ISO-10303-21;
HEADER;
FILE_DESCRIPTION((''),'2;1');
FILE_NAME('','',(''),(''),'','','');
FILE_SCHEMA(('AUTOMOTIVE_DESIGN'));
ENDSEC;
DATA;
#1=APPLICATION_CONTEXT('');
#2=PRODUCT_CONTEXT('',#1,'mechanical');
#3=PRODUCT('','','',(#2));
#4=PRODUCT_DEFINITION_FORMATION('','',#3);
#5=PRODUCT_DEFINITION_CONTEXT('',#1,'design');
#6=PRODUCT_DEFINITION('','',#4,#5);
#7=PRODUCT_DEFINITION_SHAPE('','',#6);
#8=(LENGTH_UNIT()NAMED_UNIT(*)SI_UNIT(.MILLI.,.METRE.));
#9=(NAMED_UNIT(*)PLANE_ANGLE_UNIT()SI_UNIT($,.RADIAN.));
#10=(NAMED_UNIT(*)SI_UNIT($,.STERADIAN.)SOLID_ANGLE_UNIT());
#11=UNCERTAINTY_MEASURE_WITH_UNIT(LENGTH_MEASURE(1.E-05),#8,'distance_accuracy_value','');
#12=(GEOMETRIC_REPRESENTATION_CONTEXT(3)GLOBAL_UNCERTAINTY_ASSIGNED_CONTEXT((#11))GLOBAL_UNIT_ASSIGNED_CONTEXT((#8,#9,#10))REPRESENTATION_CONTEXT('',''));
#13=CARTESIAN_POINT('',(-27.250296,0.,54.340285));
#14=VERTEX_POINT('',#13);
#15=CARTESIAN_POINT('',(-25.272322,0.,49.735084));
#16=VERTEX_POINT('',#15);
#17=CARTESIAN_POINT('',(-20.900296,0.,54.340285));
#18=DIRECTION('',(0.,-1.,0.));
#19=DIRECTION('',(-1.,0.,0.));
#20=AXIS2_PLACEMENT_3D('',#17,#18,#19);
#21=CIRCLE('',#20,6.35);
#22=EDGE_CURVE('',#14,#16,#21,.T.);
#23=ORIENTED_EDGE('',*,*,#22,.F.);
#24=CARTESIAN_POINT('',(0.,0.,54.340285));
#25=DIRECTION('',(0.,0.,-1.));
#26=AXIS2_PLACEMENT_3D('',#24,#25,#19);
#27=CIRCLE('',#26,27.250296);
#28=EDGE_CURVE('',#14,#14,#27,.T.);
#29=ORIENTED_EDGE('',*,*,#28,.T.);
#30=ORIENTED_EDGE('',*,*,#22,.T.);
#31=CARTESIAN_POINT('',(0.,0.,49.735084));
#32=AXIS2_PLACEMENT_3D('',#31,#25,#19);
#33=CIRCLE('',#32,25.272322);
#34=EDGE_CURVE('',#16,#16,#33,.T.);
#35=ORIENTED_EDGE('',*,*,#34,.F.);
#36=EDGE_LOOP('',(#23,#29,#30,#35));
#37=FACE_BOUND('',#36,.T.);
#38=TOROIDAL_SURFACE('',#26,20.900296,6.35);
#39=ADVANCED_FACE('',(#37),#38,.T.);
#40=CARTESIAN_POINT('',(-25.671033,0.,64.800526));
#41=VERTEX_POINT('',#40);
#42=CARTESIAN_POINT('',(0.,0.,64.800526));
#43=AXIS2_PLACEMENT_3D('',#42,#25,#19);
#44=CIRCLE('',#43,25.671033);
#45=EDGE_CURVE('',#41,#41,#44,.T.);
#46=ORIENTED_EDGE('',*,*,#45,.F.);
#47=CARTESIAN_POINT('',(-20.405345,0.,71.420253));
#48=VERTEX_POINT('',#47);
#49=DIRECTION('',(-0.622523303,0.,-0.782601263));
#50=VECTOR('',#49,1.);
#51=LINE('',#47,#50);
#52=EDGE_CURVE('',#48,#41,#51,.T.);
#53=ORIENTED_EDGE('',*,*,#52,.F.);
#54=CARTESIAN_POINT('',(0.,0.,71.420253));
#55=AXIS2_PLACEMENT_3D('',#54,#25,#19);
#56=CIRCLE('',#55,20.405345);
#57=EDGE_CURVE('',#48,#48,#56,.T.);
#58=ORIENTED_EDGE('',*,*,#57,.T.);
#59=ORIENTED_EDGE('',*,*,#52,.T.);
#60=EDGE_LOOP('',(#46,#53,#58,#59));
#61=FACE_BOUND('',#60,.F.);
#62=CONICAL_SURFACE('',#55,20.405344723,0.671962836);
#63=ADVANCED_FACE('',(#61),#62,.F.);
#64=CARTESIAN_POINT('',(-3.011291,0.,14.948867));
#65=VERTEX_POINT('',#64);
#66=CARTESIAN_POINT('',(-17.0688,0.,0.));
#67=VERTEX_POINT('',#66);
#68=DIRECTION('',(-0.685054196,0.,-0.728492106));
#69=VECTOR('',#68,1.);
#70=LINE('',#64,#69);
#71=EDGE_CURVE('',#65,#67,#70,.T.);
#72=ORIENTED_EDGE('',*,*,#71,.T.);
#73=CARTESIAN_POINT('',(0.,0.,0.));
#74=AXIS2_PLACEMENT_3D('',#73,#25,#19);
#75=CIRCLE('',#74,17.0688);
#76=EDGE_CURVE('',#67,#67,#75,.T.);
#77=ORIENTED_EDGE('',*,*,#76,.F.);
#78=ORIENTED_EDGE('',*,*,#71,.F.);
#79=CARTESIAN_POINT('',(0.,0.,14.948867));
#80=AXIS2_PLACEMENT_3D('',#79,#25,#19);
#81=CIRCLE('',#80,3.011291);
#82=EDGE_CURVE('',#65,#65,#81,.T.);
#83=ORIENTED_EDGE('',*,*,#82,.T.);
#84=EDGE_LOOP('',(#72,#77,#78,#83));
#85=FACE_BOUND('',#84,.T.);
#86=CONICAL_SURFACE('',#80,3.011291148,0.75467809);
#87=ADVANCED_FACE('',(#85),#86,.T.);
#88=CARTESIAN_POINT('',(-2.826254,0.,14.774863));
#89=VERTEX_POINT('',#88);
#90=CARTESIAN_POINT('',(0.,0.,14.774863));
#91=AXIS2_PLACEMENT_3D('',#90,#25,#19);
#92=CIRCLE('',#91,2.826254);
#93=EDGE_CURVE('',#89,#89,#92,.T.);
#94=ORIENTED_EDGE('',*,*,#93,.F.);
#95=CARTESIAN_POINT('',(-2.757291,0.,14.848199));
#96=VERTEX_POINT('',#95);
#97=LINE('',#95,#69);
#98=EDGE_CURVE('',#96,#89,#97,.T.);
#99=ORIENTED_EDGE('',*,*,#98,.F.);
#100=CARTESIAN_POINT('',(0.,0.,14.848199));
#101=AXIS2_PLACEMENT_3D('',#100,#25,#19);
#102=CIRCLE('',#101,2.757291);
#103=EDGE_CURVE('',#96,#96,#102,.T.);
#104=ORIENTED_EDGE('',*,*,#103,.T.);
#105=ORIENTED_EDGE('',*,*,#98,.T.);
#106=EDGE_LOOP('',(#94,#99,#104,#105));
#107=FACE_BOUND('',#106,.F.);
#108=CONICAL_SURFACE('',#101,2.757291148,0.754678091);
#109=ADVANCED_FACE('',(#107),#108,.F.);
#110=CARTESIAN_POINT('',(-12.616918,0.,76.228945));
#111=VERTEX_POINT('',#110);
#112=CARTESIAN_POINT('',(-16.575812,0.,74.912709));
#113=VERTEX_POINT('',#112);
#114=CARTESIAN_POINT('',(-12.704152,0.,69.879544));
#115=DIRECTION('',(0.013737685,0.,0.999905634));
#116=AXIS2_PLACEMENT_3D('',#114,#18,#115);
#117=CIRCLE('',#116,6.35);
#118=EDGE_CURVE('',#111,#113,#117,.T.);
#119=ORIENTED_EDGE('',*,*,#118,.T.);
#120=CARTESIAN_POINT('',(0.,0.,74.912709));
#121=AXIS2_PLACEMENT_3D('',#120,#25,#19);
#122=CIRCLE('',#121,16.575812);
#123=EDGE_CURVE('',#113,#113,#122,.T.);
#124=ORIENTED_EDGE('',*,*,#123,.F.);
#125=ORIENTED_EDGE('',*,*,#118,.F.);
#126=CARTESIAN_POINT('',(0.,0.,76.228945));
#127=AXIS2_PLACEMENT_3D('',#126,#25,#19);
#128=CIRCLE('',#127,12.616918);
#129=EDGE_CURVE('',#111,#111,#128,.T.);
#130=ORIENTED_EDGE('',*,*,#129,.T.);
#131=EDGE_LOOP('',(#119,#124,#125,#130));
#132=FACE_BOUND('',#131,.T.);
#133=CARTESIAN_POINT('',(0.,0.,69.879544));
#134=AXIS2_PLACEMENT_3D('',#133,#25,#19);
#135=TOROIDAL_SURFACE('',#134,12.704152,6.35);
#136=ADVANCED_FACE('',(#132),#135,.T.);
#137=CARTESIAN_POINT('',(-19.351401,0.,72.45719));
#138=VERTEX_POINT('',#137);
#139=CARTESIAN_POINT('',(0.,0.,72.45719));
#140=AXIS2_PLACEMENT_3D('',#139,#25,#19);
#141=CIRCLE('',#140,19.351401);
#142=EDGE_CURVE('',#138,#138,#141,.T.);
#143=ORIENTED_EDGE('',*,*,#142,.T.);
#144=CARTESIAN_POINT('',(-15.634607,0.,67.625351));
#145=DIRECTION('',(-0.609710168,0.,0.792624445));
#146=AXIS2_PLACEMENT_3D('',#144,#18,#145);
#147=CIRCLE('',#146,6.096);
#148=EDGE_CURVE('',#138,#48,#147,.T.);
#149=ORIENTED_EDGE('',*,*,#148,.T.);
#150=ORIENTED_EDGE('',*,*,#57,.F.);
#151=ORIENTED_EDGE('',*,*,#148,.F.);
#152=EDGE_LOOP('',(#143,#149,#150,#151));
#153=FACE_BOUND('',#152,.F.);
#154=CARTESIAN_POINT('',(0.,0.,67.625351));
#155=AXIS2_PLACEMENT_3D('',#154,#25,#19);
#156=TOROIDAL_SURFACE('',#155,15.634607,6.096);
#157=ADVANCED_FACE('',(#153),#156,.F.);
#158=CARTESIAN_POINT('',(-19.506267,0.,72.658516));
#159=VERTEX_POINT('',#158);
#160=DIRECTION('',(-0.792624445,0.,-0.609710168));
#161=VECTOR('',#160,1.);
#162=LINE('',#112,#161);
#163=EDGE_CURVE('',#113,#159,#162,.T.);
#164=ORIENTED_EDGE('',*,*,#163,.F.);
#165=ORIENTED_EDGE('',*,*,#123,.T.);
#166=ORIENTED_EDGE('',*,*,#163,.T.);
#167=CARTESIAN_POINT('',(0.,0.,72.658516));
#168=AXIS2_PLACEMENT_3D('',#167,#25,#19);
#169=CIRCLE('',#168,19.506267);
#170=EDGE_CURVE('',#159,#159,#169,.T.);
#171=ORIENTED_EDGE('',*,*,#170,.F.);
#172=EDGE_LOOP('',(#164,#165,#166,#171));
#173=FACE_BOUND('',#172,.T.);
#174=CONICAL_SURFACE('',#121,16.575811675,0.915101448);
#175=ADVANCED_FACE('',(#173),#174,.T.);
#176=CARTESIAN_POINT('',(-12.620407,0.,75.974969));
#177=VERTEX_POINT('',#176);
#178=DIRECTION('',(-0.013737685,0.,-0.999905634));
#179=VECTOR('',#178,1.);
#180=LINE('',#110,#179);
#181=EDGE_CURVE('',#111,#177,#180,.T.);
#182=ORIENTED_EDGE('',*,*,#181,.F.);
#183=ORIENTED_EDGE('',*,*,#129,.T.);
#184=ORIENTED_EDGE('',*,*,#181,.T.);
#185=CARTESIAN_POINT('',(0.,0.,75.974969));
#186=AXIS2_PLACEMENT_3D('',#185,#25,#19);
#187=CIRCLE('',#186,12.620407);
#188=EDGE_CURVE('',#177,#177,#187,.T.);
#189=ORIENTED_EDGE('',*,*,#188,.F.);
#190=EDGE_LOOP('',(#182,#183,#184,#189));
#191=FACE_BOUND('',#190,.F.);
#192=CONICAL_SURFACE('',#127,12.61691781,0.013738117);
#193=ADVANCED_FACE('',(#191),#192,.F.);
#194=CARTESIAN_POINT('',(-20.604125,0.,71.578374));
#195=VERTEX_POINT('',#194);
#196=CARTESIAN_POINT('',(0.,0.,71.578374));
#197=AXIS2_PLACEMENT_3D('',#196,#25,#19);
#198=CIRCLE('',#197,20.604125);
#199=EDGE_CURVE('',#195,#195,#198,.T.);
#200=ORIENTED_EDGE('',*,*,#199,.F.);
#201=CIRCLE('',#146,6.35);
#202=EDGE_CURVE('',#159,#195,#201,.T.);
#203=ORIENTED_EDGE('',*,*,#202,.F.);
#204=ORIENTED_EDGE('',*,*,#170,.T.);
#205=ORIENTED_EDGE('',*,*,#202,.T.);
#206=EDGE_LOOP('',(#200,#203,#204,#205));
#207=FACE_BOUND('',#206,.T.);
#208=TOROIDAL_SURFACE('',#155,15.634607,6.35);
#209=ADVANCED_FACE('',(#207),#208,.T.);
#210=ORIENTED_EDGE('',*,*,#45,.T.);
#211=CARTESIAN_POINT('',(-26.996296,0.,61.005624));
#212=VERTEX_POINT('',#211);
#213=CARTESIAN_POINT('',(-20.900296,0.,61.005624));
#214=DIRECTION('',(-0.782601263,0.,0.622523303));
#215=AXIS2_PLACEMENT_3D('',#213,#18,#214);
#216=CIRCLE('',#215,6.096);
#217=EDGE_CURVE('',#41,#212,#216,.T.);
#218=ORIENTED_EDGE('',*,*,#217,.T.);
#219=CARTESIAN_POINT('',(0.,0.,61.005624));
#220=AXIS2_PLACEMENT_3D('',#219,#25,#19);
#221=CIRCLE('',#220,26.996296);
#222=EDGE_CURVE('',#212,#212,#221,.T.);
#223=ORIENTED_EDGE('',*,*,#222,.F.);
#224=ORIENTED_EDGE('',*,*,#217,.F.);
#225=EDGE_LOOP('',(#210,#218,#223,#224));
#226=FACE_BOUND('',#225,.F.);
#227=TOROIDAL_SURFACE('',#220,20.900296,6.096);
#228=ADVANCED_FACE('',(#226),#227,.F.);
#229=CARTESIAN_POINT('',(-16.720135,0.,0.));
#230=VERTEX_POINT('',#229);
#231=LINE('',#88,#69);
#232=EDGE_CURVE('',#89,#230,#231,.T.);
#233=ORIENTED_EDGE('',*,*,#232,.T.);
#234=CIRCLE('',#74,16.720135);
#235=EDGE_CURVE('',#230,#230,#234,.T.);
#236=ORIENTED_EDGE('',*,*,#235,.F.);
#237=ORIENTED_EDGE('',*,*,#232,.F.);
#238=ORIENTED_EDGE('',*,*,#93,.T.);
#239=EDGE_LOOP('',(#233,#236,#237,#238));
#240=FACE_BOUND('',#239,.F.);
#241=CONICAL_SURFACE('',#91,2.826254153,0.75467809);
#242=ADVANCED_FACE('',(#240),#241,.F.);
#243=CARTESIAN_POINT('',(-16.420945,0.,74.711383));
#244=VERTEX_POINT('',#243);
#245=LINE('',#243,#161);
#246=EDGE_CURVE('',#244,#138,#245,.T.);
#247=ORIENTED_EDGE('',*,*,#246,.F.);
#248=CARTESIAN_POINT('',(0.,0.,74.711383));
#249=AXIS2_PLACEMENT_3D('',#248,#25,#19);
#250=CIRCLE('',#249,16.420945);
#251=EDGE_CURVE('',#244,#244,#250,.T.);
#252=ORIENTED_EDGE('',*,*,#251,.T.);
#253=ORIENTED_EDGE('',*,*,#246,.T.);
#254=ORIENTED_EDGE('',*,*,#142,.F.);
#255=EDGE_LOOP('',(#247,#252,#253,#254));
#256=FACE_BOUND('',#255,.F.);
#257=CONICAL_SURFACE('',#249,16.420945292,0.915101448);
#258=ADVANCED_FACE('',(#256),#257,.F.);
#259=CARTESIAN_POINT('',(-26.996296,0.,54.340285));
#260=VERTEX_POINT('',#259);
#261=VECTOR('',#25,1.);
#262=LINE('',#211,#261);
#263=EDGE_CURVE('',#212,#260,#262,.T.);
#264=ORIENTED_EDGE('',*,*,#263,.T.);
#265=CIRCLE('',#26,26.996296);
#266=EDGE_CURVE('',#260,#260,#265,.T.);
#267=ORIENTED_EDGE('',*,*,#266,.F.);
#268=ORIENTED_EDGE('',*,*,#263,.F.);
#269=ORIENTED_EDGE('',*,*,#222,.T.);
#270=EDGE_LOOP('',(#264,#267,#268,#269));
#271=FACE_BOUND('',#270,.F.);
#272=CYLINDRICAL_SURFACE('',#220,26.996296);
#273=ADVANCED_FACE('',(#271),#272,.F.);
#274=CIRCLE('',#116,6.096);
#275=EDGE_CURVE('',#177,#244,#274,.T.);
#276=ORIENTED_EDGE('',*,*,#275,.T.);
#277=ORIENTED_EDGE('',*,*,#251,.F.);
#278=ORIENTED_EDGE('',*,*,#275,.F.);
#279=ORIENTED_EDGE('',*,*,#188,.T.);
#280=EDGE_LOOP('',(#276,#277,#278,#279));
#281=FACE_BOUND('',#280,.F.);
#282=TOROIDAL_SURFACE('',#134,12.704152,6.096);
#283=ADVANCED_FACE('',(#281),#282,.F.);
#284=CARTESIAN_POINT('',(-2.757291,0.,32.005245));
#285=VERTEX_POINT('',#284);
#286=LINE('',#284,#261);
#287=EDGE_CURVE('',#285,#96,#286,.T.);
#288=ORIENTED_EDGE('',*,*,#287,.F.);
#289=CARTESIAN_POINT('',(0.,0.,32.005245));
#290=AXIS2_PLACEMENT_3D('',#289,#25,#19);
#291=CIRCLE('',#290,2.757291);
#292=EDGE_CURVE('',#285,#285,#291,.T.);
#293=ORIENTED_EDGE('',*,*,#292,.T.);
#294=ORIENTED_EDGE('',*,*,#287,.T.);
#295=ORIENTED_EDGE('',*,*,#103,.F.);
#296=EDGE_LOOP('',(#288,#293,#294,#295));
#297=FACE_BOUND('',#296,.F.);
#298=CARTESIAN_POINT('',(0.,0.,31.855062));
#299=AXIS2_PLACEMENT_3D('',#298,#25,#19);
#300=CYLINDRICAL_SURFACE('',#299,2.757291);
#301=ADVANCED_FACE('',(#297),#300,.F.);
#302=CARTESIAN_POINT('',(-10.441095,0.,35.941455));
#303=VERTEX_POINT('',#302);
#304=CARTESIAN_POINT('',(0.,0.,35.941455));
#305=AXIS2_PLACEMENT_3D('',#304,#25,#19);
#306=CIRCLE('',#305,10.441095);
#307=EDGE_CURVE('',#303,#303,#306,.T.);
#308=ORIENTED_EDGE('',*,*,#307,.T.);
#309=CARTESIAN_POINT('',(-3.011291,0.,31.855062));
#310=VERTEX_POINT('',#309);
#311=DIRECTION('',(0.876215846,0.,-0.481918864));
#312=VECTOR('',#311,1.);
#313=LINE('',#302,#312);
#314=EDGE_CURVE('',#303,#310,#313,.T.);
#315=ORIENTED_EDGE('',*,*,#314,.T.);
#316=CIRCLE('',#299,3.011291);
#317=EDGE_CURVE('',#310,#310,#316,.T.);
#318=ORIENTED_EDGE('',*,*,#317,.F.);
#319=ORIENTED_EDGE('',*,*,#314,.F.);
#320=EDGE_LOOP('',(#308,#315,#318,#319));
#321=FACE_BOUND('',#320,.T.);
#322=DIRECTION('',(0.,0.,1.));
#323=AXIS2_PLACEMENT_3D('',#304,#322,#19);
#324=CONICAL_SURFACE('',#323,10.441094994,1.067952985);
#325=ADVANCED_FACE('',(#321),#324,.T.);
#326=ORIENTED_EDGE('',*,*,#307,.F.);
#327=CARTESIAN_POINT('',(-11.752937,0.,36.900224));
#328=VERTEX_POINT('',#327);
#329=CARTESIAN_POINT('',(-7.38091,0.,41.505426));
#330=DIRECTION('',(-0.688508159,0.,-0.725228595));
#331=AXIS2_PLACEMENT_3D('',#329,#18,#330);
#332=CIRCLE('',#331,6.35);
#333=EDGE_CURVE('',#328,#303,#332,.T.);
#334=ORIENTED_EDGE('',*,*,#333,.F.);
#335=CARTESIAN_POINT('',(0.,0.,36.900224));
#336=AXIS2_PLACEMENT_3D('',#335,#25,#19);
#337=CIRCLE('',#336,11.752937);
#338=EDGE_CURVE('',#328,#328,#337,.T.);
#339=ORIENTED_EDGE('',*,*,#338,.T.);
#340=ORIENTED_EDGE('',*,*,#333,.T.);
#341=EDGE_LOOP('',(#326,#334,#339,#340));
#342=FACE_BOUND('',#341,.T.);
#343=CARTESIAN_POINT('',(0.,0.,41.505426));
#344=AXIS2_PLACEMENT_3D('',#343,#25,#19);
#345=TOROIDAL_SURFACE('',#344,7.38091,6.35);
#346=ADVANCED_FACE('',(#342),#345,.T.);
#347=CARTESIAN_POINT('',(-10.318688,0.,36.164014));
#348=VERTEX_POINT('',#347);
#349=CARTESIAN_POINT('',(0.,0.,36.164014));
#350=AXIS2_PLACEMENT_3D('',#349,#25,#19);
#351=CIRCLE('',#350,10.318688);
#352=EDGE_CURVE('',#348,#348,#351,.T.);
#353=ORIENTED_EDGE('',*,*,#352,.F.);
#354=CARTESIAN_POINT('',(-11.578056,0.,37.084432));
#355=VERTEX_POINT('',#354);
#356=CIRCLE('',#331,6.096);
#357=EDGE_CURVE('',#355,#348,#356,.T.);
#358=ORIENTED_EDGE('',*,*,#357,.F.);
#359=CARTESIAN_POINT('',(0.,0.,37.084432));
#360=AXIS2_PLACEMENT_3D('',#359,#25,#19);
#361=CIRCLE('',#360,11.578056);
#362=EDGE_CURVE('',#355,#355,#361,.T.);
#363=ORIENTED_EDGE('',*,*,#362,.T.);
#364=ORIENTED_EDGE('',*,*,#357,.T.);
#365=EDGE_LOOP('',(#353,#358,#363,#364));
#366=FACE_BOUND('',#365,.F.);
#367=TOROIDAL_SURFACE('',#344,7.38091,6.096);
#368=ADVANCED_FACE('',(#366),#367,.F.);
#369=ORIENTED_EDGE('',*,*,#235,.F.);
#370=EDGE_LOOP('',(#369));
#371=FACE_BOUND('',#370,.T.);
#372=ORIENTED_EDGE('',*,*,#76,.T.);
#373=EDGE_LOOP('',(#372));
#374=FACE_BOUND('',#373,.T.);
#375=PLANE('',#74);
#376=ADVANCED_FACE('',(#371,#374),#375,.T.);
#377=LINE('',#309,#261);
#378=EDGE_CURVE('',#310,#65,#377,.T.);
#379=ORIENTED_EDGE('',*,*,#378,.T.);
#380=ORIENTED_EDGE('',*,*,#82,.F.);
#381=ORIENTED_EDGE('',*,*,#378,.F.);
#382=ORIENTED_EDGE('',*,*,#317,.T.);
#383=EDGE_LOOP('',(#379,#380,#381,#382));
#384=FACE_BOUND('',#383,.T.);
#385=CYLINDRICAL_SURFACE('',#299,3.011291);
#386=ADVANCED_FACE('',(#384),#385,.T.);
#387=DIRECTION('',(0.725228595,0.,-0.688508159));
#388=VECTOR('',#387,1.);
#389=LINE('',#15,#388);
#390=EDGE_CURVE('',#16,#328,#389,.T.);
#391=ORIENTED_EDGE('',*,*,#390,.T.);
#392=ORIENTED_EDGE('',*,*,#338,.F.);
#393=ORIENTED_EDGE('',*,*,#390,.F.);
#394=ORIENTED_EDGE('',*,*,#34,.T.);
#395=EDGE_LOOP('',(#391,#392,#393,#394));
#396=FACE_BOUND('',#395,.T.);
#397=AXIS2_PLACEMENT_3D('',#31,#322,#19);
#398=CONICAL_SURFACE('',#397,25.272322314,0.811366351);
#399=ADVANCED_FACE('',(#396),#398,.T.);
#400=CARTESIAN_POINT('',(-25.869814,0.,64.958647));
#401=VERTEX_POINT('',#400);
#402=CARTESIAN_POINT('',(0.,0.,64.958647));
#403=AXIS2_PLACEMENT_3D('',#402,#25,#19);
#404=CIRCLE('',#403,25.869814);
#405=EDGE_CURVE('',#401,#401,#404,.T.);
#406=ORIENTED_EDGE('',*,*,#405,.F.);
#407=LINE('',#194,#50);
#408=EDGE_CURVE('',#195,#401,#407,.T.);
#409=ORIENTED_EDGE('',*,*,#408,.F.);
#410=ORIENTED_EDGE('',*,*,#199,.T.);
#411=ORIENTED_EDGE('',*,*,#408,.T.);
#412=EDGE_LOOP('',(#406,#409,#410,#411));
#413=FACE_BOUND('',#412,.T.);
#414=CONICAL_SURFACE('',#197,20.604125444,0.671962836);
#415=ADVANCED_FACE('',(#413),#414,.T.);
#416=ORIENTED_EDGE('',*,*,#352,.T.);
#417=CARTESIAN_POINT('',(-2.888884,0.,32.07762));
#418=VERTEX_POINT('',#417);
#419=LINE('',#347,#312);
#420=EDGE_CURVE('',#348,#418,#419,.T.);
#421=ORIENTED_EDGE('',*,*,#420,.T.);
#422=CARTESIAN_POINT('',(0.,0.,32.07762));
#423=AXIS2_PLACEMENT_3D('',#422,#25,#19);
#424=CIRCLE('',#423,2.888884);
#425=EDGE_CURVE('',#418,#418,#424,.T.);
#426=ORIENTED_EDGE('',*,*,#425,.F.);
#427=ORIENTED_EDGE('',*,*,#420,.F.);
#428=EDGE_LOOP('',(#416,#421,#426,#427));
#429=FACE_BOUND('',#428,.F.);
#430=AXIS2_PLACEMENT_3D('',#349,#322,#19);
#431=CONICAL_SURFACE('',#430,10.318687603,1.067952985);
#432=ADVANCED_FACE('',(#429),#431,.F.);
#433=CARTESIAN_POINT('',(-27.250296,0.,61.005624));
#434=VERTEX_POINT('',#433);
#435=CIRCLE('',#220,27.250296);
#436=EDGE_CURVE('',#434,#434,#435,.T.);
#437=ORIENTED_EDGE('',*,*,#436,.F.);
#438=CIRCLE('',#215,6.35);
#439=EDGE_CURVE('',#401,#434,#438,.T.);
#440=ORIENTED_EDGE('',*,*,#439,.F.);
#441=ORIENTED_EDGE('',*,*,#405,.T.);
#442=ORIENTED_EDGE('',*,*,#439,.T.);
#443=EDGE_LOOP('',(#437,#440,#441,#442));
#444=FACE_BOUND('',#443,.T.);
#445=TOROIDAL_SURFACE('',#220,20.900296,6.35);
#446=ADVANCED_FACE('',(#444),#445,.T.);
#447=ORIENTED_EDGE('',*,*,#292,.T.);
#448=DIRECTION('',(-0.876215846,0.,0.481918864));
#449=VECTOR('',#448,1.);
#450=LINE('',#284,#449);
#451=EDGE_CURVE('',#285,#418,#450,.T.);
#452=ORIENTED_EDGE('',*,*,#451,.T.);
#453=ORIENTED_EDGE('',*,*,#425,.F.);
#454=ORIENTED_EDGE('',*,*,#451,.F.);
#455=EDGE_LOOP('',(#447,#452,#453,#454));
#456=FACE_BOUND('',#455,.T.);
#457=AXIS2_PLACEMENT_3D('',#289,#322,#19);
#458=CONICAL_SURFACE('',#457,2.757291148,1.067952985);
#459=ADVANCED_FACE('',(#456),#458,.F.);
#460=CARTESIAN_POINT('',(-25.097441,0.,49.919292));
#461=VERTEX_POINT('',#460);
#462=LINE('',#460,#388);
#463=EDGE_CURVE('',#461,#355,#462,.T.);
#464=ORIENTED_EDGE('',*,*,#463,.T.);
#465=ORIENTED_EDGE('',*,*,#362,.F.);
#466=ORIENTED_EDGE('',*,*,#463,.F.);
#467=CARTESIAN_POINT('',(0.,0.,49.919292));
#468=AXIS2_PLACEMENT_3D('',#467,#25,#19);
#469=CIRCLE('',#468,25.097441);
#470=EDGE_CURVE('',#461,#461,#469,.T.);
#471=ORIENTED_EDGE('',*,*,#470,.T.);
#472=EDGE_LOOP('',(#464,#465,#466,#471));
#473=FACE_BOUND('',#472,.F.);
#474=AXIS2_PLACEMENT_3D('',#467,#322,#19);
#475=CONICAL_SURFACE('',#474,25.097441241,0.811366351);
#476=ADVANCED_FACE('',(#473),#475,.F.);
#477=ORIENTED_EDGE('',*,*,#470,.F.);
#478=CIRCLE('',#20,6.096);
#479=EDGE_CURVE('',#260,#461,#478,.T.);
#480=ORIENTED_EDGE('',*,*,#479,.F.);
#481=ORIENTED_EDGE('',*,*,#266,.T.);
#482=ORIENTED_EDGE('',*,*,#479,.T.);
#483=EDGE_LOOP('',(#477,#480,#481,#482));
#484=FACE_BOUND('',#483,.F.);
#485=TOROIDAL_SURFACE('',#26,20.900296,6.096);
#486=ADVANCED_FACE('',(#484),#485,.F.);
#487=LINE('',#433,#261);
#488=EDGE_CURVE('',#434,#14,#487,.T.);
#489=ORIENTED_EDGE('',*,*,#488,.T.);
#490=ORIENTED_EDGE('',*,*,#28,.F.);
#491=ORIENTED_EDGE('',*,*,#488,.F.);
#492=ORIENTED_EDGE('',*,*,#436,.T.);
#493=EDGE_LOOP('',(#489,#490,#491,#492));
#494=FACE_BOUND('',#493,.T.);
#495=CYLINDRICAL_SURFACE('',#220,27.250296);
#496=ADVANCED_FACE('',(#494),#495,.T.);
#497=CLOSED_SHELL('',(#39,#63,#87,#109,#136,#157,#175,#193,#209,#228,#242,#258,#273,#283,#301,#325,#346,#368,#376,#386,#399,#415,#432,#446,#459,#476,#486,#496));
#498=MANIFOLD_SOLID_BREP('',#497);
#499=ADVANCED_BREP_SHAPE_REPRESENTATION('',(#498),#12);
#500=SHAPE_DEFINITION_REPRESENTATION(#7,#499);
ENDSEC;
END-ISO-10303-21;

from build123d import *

# Parameters (mm, degrees)
F2_T = 0.254


# Not quite as in the source:
# - a shell that OpenCascade refuses in one call is made with other operations: the cavity is built on its own and cut out
# - a feature names something its author has since deleted; it is built from what else it names


with BuildPart() as f1:
    # F0 (on Front) → F1 (revolve)
    with BuildSketch(Plane.XZ):
        with BuildLine():
            Line((-3.0112911481, 31.8550616503), (-3.0112911481, 14.9488672614))
            Line((-3.0112911481, 14.9488672614), (-17.0688, 0))
            Line((-17.0688, 0), (0, 0))
            Line((0, 0), (0, 76.0556012392))
            Line((0, 76.0556012392), (-12.6169178095, 76.228944836))
            ThreePointArc((-12.6169178095, 76.228944836), (-14.7075461422, 75.9052317699), (-16.5758116747, 74.9127092893))
            Line((-16.5758116747, 74.9127092893), (-19.5062669903, 72.6585163811))
            ThreePointArc((-19.5062669903, 72.6585163811), (-20.0880647436, 72.1518528829), (-20.6041254437, 71.57837413))
            Line((-20.6041254437, 71.57837413), (-25.8698135255, 64.9586474103))
            ThreePointArc((-25.8698135255, 64.9586474103), (-26.8952491924, 63.0991932265), (-27.2502955049, 61.005624435))
            Line((-27.2502955049, 61.005624435), (-27.2502955049, 54.34028509))
            ThreePointArc((-27.2502955049, 54.34028509), (-26.7348850464, 51.8342793274), (-25.2723223137, 49.735083511))
            Line((-25.2723223137, 49.735083511), (-11.7529370155, 36.9002240705))
            ThreePointArc((-11.7529370155, 36.9002240705), (-11.1278091674, 36.3787066033), (-10.4410949941, 35.9414550289))
            Line((-10.4410949941, 35.9414550289), (-3.0112911481, 31.8550616503))
        make_face()
    revolve(axis=Axis((0, 0, 38.0278006196), (0, 0, -1)))

    # F2: shell of thickness 0.254, made by hand


with BuildPart() as f2_core1:
    # F2_t2: copy of F1
    add(f1.part)

    # the walls: a layer under each face that stays
    f2_faces = [f2_core1.faces().sort_by_distance(p)[0] for p in [
        (3.0112911481, 0, 23.4019644558),
        (10.0400455741, 0, 7.4744336307),
        (14.7075461422, 0, 75.9052317699),
        (18.0410393325, 0, 73.7856128352),
        (20.0880647436, 0, 72.1518528829),
        (23.2369694846, 0, 68.2685107702),
        (26.8952491924, 0, 63.0991932265),
        (27.2502955049, 0, 57.6729547625),
        (26.7348850464, 0, 51.8342793274),
        (18.5126296646, 0, 43.3176537907),
        (11.1278091674, 0, 36.3787066033),
        (6.7261930711, 0, 33.8982583396),
    ]]
    thicken(f2_faces, amount=-F2_T, mode=Mode.SUBTRACT)

    # F2_s3 → F2_t4 (revolve, cut)
    with BuildSketch(Plane.XZ):
        Polygon((-3.0150552221, 31.852836062), (-2.7572911481, 31.8550616503), (-2.7572911481, 32.005244518), (-2.8888837566, 32.0776204751), align=None)
    revolve(axis=Axis((0, 0, 31.8550616503), (0, 0, -1)), mode=Mode.SUBTRACT)

    # F2_s5 → F2_t6 (revolve, cut)
    with BuildSketch(Plane.XZ):
        Polygon((-3.0156815181, 14.9506072991), (-2.7572911481, 14.9488672614), (-2.7572911481, 14.8481993064), (-2.8262541531, 14.7748634958), align=None)
    revolve(axis=Axis((0, 0, 14.9488672614), (0, 0, -1)), mode=Mode.SUBTRACT)


with BuildPart() as f1_1:
    add(f1.part)

    # what is left inside the walls is the cavity
    f2_cavity = [f2_core1.part.solids().sort_by_distance(p)[0] for p in [
        (20.589231, 0, 45.642847),
    ]]
    add(f2_cavity, mode=Mode.SUBTRACT)


solid = f1_1.part
